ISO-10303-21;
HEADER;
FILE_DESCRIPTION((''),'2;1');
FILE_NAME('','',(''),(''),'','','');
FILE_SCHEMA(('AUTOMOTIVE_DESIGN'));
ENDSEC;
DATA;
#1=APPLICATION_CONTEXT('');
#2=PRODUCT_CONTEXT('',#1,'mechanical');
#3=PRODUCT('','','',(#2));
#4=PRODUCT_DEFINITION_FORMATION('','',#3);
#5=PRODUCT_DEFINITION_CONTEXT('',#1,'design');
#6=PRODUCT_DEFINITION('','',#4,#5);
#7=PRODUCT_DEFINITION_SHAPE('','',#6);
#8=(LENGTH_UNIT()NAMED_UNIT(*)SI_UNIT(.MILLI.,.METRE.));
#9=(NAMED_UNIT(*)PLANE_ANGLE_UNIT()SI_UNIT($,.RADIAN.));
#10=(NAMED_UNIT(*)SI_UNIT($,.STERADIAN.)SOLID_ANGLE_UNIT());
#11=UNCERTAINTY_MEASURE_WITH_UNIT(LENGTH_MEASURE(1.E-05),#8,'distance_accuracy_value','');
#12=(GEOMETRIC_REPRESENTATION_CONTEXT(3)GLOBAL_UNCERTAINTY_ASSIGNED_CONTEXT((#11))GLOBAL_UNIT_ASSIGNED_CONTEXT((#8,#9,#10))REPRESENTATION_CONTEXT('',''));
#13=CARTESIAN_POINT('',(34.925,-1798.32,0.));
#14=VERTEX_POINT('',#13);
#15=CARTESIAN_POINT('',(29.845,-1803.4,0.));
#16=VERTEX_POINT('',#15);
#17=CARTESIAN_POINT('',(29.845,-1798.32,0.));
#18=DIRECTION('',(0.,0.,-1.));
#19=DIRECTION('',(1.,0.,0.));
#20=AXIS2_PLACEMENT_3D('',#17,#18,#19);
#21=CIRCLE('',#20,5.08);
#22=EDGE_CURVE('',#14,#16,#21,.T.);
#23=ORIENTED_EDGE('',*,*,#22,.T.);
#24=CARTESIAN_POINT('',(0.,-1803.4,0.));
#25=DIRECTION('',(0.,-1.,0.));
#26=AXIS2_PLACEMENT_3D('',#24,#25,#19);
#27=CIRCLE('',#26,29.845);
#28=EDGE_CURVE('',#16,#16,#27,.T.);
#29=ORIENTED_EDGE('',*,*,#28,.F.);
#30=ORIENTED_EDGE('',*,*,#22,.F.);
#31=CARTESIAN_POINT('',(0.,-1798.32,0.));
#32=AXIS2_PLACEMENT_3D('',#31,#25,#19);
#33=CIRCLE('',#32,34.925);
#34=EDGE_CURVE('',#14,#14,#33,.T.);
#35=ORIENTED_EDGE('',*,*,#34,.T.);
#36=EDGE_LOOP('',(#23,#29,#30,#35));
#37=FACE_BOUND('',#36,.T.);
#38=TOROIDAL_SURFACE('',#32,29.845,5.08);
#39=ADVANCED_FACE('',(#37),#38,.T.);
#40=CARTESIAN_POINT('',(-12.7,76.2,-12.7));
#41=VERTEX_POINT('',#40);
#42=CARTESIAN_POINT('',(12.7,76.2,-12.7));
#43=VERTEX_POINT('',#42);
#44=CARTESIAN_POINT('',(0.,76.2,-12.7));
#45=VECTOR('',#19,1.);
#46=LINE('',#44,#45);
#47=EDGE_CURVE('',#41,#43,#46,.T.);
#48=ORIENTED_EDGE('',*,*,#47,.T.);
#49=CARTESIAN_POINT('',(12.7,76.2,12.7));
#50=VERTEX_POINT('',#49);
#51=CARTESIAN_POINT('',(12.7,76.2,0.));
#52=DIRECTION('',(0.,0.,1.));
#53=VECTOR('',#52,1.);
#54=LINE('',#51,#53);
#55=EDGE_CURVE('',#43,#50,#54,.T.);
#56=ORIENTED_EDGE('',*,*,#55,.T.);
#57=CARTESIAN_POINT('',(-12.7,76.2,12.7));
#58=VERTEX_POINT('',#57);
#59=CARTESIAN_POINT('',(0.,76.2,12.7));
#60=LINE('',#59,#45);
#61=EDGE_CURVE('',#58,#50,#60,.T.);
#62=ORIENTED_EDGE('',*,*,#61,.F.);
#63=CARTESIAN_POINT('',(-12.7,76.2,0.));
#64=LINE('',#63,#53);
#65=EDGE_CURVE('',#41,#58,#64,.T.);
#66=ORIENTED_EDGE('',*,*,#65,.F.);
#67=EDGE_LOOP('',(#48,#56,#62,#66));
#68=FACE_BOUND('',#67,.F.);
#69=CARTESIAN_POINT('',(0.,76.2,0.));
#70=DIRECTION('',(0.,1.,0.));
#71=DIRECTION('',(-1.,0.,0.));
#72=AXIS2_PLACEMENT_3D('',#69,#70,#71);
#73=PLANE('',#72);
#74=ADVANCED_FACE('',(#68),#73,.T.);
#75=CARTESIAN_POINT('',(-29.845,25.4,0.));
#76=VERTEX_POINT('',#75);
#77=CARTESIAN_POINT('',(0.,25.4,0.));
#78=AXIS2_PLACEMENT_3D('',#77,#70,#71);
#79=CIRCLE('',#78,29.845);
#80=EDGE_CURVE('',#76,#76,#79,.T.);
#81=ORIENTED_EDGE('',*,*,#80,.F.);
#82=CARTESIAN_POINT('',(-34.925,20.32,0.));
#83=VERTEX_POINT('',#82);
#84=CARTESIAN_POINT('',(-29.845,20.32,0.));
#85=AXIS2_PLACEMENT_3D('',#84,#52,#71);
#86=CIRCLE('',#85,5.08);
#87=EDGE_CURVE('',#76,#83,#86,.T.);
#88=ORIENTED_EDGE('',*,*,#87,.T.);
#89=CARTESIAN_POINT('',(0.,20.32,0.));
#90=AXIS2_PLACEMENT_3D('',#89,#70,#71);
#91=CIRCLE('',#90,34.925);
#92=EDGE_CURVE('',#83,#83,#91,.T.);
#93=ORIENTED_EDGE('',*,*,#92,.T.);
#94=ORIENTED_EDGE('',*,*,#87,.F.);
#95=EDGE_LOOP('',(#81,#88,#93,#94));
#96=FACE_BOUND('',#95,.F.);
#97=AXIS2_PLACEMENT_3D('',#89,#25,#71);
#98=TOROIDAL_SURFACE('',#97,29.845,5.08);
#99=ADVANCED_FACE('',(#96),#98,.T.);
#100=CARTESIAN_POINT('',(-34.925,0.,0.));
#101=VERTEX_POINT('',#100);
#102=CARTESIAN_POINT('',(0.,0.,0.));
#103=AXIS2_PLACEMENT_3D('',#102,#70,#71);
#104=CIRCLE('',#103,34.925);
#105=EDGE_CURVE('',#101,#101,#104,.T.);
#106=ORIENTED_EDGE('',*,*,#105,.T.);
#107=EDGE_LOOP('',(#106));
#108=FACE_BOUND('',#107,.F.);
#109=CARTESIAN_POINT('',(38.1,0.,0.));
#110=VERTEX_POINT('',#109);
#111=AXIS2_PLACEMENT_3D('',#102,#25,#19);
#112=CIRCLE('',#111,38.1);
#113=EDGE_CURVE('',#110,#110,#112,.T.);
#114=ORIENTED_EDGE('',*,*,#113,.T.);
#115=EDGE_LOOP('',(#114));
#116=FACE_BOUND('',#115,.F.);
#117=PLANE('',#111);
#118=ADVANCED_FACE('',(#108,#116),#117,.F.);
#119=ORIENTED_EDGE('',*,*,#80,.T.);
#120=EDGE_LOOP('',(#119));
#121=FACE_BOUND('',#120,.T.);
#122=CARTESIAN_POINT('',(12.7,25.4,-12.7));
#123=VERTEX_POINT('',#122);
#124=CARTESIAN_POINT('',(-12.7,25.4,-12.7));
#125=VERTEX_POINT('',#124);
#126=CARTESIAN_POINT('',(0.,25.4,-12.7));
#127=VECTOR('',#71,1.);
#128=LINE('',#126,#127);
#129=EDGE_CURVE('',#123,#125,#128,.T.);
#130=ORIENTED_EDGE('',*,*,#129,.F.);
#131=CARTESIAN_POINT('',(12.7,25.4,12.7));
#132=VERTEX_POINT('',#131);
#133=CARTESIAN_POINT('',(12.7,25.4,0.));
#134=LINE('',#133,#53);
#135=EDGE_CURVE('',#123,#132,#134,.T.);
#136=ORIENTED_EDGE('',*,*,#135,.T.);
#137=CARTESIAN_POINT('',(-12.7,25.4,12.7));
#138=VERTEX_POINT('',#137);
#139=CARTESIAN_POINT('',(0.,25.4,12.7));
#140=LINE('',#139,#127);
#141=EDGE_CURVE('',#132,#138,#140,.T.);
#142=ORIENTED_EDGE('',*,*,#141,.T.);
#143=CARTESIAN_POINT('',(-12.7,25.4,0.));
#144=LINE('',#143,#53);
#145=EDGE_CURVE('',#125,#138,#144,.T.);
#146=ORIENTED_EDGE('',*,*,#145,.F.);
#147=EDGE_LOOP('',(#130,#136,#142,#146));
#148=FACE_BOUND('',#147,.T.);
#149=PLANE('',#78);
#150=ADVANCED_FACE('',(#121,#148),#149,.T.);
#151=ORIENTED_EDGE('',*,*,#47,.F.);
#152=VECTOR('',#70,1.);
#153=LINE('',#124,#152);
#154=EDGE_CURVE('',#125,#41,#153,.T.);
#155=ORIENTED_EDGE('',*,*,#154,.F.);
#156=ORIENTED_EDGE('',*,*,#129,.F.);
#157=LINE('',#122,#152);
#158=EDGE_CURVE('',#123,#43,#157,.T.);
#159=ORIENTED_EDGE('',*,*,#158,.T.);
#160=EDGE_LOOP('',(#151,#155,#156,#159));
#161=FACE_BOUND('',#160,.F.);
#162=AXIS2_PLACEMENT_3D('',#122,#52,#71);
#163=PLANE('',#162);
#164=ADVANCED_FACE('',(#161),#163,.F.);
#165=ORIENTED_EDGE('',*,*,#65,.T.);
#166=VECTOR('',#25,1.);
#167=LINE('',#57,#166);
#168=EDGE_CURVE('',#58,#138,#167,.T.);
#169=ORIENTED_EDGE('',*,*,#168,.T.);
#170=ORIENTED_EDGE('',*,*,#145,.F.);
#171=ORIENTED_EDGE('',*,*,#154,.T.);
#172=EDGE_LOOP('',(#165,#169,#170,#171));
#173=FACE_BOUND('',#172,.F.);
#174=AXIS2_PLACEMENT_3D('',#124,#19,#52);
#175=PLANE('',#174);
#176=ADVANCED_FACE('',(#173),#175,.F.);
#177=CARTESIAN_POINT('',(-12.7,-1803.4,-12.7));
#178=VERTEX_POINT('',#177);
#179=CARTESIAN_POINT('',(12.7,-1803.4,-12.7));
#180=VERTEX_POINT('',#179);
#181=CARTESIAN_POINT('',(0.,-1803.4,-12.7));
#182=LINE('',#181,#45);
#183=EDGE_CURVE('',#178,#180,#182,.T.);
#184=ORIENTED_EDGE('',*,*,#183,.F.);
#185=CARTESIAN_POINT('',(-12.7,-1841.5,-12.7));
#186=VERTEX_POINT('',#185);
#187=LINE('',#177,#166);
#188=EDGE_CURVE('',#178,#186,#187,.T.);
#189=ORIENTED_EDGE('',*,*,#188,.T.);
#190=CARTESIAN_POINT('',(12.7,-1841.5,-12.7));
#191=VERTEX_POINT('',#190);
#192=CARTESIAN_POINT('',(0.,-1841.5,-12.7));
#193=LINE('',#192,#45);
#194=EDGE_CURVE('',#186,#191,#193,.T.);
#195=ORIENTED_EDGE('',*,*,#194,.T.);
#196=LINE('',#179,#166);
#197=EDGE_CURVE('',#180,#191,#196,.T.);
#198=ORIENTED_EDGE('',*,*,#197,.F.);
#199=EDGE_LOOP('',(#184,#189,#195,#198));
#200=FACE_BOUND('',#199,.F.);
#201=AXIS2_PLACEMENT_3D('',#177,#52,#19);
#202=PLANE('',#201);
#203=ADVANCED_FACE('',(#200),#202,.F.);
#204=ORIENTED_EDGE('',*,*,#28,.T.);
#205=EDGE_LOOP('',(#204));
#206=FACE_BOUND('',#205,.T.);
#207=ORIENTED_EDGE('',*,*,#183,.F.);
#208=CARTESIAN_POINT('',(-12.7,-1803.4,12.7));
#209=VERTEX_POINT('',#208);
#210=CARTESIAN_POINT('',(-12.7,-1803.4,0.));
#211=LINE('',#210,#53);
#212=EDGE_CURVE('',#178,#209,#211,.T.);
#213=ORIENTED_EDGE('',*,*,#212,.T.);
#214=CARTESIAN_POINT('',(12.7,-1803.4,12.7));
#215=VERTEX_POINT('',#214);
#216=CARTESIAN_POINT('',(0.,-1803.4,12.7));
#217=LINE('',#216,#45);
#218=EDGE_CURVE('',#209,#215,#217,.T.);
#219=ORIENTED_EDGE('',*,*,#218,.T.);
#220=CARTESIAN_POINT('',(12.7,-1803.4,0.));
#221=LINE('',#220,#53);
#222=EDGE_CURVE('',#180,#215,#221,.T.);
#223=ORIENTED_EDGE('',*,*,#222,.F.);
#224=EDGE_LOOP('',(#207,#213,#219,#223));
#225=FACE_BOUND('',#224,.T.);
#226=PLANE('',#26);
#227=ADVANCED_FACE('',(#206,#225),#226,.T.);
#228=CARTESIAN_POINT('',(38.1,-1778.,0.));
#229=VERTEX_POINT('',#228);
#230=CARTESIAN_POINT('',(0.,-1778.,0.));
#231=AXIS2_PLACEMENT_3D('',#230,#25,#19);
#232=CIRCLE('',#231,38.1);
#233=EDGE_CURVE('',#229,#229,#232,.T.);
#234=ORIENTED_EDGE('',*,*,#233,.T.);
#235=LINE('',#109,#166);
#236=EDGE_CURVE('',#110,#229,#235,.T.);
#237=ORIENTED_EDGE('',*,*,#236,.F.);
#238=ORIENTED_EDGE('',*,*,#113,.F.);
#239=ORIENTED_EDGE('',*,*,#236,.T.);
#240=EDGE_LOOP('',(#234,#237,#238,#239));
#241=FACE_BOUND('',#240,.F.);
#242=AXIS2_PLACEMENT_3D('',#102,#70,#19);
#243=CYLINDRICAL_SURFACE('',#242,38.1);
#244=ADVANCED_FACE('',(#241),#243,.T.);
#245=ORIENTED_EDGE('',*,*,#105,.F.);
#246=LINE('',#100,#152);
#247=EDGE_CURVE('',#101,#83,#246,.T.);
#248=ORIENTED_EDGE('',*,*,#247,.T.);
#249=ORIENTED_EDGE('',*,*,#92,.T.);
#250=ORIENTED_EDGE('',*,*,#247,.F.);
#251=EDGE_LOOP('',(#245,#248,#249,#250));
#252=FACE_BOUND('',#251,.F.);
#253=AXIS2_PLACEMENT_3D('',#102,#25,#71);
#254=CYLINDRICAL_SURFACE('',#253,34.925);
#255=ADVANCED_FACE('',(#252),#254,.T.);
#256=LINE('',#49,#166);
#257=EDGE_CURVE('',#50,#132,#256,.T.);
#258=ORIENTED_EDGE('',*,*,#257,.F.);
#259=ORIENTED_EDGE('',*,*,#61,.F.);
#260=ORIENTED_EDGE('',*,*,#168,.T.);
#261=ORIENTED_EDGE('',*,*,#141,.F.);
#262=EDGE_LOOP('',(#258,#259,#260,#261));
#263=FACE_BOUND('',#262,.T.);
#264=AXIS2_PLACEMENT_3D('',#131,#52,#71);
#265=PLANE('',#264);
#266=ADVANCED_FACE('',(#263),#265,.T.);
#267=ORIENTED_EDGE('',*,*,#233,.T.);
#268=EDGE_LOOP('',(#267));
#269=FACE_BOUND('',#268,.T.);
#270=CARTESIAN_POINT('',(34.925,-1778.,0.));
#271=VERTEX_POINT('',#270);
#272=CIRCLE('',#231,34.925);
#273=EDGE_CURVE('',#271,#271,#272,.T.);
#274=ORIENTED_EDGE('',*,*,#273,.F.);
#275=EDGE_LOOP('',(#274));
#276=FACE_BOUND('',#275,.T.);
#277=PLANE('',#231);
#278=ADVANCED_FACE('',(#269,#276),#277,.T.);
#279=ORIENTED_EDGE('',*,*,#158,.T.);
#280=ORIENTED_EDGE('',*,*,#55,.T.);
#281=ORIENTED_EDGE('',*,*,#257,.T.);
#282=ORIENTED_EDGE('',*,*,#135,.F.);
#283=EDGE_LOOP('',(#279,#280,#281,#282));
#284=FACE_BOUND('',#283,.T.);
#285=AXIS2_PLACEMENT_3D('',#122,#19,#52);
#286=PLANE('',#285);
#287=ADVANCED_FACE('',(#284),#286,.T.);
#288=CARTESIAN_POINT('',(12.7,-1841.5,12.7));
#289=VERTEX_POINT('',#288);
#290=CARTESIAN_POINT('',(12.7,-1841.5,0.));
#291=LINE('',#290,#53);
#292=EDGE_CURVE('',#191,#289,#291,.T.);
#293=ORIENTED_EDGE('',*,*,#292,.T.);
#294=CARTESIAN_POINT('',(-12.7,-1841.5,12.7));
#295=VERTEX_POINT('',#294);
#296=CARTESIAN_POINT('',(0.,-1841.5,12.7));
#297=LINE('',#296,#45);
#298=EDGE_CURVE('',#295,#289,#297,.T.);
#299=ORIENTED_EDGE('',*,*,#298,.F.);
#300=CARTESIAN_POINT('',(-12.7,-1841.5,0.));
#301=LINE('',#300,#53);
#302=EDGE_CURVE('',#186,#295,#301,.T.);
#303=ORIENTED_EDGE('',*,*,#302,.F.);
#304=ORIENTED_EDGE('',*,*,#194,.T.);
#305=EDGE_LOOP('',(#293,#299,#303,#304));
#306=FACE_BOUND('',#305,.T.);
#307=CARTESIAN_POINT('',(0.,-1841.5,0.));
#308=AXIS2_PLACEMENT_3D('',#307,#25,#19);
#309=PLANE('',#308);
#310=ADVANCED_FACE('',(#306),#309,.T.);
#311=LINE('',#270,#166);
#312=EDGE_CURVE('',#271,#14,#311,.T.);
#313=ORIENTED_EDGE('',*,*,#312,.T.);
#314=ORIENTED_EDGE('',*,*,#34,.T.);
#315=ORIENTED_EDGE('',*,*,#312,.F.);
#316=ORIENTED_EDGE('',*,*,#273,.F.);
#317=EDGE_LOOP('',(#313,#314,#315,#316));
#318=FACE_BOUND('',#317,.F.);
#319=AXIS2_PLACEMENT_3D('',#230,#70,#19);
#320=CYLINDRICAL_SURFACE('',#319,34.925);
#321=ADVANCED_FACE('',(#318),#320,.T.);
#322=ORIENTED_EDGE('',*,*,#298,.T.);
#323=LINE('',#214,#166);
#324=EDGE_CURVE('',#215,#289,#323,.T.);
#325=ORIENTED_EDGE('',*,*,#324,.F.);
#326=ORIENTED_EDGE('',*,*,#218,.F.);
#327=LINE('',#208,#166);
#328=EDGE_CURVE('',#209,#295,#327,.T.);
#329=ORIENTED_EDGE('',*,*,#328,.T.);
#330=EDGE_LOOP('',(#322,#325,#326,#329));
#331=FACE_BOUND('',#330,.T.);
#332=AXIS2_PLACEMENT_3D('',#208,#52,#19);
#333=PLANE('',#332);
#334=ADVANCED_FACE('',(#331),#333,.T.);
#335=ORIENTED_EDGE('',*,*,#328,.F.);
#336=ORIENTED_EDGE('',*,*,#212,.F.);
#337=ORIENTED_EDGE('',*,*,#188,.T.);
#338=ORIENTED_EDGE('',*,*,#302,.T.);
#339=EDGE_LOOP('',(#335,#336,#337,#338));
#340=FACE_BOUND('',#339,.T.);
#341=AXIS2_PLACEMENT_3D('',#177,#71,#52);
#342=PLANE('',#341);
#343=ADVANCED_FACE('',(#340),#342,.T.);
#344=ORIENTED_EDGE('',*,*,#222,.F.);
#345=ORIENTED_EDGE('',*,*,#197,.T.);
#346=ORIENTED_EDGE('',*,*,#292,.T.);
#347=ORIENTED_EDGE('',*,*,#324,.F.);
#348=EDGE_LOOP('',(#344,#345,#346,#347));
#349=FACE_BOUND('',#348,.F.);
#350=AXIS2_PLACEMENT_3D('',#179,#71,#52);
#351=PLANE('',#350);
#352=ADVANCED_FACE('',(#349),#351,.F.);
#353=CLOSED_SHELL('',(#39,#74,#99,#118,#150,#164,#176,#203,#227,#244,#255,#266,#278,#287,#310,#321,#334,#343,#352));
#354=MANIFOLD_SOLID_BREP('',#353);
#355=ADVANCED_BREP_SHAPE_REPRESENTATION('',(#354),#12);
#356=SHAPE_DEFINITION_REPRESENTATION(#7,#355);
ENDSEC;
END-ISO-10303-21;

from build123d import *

# Parameters (mm, degrees)
F0_R     = 38.1
F1_DEPTH = 1778
F2_R     = 34.925
F3_DEPTH = 25.4
F4_R     = 34.925
F5_DEPTH = 25.4
F6_W     = 25.4
F6_H     = 25.4
F7_DEPTH = 38.1
F8_W     = 25.4
F8_H     = 25.4
F9_DEPTH = 38.1
F10_R    = 5.08
F11_R    = 5.08


# Not quite as in the source:
# - a pattern or mirror of a feature is missing from the dataset's text; its kind, count and spacing are read off the source's solid


with BuildPart() as f1:
    # F0 (on Front) → F1 (new body)
    with BuildSketch(Plane.XZ):
        Circle(F0_R)
    extrude(amount=F1_DEPTH)

    # F2 (on face) → F3 (join)
    with BuildSketch(Plane.XZ.offset(1778)):
        Circle(F2_R)
    extrude(amount=F3_DEPTH)

    # F4 (on face) → F5 (join)
    with BuildSketch(Plane(origin=(0, 0, 0), x_dir=(-1, 0, 0), z_dir=(0, 1, 0))):
        Circle(F4_R)
    extrude(amount=F5_DEPTH)

    # F6 (on face) → F7 (join)
    with BuildSketch(Plane.XZ.offset(1803.4)):
        Rectangle(F6_W, F6_H)
    f7 = extrude(amount=F7_DEPTH)

    # F7_copies: F7 across plane
    add(f7.mirror(Plane.ZX.offset(-882.65)))

    # F8 (on face) → F9 (join)
    with BuildSketch(Plane(origin=(0, 25.4, 0), x_dir=(-1, 0, 0), z_dir=(0, 1, 0))):
        Rectangle(F8_W, F8_H)
    extrude(amount=F9_DEPTH)

    # F10
    f10_edges = [f1.edges().sort_by_distance(p)[0] for p in [
        (34.925, 25.4, 0),
    ]]
    fillet(f10_edges, radius=F10_R)

    # F11
    f11_edges = [f1.edges().sort_by_distance(p)[0] for p in [
        (-34.925, -1803.4, 0),
    ]]
    fillet(f11_edges, radius=F11_R)


solid = f1.part
